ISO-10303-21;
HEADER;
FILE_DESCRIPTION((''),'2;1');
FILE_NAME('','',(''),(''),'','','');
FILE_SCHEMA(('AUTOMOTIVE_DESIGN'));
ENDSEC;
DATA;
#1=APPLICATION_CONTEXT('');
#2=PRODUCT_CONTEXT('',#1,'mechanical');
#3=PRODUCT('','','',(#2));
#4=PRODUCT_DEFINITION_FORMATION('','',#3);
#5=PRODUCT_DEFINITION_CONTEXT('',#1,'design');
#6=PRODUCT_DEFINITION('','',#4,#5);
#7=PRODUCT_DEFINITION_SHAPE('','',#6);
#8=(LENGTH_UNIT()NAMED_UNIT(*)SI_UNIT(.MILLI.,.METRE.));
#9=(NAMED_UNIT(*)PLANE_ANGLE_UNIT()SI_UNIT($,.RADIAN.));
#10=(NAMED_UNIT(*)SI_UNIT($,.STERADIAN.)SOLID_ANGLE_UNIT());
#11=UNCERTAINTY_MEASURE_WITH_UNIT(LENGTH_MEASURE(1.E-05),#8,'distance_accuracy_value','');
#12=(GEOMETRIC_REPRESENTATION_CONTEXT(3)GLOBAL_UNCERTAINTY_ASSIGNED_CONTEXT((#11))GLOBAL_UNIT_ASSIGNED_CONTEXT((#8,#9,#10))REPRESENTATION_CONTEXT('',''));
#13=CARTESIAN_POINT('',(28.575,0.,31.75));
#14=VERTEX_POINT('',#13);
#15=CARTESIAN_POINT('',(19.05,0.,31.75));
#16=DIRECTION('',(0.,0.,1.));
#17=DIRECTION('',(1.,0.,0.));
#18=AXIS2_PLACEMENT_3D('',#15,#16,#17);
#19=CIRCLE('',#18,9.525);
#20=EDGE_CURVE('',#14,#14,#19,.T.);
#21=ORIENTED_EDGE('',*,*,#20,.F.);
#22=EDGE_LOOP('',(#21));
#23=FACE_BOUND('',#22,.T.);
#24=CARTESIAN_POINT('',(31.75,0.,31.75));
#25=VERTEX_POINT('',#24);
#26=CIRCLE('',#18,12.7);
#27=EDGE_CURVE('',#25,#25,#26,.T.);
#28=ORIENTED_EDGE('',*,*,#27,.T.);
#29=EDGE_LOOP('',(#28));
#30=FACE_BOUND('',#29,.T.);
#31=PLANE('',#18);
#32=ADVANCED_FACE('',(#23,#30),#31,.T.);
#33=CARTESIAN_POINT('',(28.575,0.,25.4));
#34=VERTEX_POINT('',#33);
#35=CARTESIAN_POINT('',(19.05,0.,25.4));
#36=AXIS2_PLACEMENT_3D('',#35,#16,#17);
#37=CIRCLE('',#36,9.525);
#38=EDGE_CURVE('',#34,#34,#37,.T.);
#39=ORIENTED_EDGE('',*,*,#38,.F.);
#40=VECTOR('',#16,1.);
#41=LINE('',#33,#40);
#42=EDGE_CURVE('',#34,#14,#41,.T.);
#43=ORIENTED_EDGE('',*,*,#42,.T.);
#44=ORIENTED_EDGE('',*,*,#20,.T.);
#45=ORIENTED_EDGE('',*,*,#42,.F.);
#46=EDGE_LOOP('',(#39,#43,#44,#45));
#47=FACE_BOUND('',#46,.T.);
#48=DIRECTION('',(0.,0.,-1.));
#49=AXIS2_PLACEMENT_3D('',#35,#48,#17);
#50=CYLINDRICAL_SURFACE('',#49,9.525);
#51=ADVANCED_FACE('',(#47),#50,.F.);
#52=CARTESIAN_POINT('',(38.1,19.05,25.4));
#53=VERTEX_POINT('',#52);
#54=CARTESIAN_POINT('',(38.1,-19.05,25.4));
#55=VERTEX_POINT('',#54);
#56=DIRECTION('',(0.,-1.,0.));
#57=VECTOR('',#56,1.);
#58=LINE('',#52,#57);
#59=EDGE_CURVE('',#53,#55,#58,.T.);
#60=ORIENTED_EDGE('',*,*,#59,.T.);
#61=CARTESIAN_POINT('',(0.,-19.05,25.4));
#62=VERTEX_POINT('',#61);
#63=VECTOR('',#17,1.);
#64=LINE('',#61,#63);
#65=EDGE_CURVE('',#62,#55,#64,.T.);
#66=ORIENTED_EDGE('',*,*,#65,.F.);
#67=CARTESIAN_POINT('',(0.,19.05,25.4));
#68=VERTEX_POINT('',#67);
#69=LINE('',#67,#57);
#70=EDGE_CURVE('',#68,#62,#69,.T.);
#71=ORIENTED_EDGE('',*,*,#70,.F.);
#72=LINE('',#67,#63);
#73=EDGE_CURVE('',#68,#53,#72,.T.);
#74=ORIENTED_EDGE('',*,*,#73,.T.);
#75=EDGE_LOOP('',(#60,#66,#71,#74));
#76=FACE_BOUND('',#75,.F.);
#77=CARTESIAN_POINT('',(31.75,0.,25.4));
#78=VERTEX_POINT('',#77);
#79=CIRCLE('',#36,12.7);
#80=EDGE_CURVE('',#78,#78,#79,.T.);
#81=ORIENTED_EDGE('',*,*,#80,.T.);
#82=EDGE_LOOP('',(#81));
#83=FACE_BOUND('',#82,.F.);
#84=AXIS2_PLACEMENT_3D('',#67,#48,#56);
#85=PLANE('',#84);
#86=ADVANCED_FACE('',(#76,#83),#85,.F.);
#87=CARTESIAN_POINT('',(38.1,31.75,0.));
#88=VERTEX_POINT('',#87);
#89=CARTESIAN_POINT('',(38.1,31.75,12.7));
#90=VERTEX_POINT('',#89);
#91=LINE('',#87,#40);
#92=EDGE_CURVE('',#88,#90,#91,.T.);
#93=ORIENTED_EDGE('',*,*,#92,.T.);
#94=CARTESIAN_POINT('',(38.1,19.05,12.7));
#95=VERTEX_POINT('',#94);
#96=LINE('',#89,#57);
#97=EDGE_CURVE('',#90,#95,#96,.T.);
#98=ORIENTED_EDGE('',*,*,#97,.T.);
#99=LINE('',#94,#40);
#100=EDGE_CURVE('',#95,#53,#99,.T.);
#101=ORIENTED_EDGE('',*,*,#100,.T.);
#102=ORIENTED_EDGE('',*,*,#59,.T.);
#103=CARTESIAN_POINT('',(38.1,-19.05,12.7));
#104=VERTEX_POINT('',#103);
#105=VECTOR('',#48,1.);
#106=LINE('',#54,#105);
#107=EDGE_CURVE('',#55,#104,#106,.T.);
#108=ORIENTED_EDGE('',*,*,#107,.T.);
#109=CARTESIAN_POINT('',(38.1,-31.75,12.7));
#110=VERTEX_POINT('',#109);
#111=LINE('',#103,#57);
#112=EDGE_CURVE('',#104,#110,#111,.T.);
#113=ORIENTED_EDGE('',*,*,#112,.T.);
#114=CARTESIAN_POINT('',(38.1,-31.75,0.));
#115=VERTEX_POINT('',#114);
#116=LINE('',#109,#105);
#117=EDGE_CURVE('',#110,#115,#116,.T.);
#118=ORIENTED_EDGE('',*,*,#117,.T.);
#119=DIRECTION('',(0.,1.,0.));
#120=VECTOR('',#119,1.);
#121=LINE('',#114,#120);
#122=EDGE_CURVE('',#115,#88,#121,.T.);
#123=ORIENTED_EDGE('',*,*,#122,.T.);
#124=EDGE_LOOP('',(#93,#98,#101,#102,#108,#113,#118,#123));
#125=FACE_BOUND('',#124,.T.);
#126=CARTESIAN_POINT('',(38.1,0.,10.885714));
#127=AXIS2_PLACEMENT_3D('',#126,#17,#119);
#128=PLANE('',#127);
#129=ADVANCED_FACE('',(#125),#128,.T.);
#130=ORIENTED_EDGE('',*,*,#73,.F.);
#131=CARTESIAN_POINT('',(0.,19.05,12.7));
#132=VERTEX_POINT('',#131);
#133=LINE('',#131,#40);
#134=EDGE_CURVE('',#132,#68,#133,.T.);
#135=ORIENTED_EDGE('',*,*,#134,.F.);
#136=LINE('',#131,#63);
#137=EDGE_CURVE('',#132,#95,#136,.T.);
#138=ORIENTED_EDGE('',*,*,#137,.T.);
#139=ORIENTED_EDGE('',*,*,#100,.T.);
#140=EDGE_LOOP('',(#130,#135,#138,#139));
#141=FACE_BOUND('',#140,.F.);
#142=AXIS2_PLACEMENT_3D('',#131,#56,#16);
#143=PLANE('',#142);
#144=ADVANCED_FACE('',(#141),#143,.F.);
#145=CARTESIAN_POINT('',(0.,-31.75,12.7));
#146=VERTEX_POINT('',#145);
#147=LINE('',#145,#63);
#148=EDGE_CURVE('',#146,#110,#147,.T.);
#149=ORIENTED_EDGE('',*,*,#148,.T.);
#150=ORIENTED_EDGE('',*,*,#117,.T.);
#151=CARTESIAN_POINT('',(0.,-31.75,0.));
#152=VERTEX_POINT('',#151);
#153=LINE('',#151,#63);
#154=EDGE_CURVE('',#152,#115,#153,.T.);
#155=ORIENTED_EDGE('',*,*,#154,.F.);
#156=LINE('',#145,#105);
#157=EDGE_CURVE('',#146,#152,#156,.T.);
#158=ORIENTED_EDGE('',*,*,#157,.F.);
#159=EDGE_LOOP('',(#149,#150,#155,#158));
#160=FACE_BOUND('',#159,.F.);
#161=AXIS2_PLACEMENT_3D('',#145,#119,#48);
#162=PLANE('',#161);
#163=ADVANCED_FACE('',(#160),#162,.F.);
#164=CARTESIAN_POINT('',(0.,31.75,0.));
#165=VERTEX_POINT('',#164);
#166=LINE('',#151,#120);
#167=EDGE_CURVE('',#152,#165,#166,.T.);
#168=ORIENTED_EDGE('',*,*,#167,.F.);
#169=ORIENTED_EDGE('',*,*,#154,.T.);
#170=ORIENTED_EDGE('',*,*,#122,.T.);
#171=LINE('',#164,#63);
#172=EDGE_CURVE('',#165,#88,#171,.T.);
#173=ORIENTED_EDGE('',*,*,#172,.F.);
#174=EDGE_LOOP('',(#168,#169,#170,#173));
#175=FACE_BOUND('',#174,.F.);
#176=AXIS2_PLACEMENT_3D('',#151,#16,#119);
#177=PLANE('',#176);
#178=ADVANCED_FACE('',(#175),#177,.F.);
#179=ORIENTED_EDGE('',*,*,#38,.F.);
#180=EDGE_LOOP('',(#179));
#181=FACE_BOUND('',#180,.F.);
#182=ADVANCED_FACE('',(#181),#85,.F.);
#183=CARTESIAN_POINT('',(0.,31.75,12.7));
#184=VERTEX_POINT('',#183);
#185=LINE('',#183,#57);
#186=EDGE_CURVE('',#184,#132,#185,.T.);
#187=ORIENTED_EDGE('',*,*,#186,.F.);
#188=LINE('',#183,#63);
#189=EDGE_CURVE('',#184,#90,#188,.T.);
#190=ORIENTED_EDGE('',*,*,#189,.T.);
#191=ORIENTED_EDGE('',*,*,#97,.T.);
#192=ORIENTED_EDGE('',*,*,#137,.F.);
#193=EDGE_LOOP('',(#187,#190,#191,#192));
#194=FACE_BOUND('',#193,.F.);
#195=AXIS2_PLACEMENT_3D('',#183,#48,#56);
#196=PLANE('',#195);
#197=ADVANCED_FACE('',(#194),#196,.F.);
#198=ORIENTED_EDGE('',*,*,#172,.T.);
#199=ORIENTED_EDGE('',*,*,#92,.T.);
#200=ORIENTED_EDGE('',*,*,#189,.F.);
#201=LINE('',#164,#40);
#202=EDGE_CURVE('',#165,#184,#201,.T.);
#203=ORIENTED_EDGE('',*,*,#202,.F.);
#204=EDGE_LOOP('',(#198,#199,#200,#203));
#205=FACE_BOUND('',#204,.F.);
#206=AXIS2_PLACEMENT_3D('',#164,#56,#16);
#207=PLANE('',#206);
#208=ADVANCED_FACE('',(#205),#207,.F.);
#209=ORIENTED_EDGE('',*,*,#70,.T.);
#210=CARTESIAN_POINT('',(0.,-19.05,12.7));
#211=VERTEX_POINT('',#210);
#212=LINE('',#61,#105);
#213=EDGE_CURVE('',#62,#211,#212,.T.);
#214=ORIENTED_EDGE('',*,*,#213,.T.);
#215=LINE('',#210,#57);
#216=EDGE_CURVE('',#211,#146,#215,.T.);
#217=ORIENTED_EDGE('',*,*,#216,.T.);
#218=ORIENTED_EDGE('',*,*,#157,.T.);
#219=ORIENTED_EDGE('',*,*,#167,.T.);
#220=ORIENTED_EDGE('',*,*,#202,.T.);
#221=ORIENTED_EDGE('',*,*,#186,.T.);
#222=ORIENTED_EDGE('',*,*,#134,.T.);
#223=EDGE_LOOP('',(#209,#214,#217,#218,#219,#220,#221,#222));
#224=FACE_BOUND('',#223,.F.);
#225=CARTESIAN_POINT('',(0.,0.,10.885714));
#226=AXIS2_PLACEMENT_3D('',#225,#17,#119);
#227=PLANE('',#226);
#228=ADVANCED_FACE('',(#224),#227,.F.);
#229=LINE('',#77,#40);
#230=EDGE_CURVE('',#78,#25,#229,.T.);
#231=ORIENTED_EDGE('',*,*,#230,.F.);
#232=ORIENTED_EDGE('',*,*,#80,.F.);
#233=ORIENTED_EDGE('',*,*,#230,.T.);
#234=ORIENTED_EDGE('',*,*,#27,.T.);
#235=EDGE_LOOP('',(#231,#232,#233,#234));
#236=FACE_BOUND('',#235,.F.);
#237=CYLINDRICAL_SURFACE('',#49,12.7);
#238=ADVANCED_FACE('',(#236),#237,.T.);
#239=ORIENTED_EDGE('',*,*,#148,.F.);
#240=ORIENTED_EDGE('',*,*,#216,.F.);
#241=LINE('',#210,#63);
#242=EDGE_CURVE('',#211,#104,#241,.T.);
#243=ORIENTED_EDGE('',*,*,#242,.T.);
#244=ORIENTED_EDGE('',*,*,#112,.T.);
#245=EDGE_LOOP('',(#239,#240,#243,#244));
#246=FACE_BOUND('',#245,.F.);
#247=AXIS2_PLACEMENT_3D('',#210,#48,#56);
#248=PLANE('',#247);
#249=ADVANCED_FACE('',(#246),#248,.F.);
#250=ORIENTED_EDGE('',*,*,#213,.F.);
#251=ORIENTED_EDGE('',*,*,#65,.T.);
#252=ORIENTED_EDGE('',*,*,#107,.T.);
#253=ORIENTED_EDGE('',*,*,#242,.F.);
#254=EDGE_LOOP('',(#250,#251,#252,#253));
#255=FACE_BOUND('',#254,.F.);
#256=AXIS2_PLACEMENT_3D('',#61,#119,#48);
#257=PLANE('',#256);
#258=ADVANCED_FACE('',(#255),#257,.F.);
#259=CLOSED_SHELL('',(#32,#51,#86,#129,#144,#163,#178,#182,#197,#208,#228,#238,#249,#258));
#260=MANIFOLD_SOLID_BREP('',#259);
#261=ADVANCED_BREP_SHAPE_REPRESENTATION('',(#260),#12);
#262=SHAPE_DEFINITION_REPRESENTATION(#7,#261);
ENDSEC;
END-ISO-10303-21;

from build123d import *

# Parameters (mm, degrees)
F1_DEPTH = 38.1
F2_R     = 12.7
F2_R_2   = 9.525
F3_DEPTH = 6.35


# Not quite as in the source:
# - a feature names something its author has since deleted; it is built from what else it names


with BuildPart() as f1:
    # F0 (on Right) → F1 (new body)
    with BuildSketch(Plane.YZ):
        Polygon((-31.75, 0), (0, 0), (31.75, 0), (31.75, 12.7), (19.05, 12.7), (19.05, 25.4), (-19.05, 25.4), (-19.05, 12.7), (-31.75, 12.7), align=None)
    extrude(amount=F1_DEPTH)

    # F2 (on face) → F3 (join)
    with BuildSketch(Plane.XY.offset(25.4)):
        with Locations((19.05, 0)):
            Circle(F2_R)
        with Locations((19.05, 0)):
            Circle(F2_R_2, mode=Mode.SUBTRACT)
    extrude(amount=F3_DEPTH)


solid = f1.part
